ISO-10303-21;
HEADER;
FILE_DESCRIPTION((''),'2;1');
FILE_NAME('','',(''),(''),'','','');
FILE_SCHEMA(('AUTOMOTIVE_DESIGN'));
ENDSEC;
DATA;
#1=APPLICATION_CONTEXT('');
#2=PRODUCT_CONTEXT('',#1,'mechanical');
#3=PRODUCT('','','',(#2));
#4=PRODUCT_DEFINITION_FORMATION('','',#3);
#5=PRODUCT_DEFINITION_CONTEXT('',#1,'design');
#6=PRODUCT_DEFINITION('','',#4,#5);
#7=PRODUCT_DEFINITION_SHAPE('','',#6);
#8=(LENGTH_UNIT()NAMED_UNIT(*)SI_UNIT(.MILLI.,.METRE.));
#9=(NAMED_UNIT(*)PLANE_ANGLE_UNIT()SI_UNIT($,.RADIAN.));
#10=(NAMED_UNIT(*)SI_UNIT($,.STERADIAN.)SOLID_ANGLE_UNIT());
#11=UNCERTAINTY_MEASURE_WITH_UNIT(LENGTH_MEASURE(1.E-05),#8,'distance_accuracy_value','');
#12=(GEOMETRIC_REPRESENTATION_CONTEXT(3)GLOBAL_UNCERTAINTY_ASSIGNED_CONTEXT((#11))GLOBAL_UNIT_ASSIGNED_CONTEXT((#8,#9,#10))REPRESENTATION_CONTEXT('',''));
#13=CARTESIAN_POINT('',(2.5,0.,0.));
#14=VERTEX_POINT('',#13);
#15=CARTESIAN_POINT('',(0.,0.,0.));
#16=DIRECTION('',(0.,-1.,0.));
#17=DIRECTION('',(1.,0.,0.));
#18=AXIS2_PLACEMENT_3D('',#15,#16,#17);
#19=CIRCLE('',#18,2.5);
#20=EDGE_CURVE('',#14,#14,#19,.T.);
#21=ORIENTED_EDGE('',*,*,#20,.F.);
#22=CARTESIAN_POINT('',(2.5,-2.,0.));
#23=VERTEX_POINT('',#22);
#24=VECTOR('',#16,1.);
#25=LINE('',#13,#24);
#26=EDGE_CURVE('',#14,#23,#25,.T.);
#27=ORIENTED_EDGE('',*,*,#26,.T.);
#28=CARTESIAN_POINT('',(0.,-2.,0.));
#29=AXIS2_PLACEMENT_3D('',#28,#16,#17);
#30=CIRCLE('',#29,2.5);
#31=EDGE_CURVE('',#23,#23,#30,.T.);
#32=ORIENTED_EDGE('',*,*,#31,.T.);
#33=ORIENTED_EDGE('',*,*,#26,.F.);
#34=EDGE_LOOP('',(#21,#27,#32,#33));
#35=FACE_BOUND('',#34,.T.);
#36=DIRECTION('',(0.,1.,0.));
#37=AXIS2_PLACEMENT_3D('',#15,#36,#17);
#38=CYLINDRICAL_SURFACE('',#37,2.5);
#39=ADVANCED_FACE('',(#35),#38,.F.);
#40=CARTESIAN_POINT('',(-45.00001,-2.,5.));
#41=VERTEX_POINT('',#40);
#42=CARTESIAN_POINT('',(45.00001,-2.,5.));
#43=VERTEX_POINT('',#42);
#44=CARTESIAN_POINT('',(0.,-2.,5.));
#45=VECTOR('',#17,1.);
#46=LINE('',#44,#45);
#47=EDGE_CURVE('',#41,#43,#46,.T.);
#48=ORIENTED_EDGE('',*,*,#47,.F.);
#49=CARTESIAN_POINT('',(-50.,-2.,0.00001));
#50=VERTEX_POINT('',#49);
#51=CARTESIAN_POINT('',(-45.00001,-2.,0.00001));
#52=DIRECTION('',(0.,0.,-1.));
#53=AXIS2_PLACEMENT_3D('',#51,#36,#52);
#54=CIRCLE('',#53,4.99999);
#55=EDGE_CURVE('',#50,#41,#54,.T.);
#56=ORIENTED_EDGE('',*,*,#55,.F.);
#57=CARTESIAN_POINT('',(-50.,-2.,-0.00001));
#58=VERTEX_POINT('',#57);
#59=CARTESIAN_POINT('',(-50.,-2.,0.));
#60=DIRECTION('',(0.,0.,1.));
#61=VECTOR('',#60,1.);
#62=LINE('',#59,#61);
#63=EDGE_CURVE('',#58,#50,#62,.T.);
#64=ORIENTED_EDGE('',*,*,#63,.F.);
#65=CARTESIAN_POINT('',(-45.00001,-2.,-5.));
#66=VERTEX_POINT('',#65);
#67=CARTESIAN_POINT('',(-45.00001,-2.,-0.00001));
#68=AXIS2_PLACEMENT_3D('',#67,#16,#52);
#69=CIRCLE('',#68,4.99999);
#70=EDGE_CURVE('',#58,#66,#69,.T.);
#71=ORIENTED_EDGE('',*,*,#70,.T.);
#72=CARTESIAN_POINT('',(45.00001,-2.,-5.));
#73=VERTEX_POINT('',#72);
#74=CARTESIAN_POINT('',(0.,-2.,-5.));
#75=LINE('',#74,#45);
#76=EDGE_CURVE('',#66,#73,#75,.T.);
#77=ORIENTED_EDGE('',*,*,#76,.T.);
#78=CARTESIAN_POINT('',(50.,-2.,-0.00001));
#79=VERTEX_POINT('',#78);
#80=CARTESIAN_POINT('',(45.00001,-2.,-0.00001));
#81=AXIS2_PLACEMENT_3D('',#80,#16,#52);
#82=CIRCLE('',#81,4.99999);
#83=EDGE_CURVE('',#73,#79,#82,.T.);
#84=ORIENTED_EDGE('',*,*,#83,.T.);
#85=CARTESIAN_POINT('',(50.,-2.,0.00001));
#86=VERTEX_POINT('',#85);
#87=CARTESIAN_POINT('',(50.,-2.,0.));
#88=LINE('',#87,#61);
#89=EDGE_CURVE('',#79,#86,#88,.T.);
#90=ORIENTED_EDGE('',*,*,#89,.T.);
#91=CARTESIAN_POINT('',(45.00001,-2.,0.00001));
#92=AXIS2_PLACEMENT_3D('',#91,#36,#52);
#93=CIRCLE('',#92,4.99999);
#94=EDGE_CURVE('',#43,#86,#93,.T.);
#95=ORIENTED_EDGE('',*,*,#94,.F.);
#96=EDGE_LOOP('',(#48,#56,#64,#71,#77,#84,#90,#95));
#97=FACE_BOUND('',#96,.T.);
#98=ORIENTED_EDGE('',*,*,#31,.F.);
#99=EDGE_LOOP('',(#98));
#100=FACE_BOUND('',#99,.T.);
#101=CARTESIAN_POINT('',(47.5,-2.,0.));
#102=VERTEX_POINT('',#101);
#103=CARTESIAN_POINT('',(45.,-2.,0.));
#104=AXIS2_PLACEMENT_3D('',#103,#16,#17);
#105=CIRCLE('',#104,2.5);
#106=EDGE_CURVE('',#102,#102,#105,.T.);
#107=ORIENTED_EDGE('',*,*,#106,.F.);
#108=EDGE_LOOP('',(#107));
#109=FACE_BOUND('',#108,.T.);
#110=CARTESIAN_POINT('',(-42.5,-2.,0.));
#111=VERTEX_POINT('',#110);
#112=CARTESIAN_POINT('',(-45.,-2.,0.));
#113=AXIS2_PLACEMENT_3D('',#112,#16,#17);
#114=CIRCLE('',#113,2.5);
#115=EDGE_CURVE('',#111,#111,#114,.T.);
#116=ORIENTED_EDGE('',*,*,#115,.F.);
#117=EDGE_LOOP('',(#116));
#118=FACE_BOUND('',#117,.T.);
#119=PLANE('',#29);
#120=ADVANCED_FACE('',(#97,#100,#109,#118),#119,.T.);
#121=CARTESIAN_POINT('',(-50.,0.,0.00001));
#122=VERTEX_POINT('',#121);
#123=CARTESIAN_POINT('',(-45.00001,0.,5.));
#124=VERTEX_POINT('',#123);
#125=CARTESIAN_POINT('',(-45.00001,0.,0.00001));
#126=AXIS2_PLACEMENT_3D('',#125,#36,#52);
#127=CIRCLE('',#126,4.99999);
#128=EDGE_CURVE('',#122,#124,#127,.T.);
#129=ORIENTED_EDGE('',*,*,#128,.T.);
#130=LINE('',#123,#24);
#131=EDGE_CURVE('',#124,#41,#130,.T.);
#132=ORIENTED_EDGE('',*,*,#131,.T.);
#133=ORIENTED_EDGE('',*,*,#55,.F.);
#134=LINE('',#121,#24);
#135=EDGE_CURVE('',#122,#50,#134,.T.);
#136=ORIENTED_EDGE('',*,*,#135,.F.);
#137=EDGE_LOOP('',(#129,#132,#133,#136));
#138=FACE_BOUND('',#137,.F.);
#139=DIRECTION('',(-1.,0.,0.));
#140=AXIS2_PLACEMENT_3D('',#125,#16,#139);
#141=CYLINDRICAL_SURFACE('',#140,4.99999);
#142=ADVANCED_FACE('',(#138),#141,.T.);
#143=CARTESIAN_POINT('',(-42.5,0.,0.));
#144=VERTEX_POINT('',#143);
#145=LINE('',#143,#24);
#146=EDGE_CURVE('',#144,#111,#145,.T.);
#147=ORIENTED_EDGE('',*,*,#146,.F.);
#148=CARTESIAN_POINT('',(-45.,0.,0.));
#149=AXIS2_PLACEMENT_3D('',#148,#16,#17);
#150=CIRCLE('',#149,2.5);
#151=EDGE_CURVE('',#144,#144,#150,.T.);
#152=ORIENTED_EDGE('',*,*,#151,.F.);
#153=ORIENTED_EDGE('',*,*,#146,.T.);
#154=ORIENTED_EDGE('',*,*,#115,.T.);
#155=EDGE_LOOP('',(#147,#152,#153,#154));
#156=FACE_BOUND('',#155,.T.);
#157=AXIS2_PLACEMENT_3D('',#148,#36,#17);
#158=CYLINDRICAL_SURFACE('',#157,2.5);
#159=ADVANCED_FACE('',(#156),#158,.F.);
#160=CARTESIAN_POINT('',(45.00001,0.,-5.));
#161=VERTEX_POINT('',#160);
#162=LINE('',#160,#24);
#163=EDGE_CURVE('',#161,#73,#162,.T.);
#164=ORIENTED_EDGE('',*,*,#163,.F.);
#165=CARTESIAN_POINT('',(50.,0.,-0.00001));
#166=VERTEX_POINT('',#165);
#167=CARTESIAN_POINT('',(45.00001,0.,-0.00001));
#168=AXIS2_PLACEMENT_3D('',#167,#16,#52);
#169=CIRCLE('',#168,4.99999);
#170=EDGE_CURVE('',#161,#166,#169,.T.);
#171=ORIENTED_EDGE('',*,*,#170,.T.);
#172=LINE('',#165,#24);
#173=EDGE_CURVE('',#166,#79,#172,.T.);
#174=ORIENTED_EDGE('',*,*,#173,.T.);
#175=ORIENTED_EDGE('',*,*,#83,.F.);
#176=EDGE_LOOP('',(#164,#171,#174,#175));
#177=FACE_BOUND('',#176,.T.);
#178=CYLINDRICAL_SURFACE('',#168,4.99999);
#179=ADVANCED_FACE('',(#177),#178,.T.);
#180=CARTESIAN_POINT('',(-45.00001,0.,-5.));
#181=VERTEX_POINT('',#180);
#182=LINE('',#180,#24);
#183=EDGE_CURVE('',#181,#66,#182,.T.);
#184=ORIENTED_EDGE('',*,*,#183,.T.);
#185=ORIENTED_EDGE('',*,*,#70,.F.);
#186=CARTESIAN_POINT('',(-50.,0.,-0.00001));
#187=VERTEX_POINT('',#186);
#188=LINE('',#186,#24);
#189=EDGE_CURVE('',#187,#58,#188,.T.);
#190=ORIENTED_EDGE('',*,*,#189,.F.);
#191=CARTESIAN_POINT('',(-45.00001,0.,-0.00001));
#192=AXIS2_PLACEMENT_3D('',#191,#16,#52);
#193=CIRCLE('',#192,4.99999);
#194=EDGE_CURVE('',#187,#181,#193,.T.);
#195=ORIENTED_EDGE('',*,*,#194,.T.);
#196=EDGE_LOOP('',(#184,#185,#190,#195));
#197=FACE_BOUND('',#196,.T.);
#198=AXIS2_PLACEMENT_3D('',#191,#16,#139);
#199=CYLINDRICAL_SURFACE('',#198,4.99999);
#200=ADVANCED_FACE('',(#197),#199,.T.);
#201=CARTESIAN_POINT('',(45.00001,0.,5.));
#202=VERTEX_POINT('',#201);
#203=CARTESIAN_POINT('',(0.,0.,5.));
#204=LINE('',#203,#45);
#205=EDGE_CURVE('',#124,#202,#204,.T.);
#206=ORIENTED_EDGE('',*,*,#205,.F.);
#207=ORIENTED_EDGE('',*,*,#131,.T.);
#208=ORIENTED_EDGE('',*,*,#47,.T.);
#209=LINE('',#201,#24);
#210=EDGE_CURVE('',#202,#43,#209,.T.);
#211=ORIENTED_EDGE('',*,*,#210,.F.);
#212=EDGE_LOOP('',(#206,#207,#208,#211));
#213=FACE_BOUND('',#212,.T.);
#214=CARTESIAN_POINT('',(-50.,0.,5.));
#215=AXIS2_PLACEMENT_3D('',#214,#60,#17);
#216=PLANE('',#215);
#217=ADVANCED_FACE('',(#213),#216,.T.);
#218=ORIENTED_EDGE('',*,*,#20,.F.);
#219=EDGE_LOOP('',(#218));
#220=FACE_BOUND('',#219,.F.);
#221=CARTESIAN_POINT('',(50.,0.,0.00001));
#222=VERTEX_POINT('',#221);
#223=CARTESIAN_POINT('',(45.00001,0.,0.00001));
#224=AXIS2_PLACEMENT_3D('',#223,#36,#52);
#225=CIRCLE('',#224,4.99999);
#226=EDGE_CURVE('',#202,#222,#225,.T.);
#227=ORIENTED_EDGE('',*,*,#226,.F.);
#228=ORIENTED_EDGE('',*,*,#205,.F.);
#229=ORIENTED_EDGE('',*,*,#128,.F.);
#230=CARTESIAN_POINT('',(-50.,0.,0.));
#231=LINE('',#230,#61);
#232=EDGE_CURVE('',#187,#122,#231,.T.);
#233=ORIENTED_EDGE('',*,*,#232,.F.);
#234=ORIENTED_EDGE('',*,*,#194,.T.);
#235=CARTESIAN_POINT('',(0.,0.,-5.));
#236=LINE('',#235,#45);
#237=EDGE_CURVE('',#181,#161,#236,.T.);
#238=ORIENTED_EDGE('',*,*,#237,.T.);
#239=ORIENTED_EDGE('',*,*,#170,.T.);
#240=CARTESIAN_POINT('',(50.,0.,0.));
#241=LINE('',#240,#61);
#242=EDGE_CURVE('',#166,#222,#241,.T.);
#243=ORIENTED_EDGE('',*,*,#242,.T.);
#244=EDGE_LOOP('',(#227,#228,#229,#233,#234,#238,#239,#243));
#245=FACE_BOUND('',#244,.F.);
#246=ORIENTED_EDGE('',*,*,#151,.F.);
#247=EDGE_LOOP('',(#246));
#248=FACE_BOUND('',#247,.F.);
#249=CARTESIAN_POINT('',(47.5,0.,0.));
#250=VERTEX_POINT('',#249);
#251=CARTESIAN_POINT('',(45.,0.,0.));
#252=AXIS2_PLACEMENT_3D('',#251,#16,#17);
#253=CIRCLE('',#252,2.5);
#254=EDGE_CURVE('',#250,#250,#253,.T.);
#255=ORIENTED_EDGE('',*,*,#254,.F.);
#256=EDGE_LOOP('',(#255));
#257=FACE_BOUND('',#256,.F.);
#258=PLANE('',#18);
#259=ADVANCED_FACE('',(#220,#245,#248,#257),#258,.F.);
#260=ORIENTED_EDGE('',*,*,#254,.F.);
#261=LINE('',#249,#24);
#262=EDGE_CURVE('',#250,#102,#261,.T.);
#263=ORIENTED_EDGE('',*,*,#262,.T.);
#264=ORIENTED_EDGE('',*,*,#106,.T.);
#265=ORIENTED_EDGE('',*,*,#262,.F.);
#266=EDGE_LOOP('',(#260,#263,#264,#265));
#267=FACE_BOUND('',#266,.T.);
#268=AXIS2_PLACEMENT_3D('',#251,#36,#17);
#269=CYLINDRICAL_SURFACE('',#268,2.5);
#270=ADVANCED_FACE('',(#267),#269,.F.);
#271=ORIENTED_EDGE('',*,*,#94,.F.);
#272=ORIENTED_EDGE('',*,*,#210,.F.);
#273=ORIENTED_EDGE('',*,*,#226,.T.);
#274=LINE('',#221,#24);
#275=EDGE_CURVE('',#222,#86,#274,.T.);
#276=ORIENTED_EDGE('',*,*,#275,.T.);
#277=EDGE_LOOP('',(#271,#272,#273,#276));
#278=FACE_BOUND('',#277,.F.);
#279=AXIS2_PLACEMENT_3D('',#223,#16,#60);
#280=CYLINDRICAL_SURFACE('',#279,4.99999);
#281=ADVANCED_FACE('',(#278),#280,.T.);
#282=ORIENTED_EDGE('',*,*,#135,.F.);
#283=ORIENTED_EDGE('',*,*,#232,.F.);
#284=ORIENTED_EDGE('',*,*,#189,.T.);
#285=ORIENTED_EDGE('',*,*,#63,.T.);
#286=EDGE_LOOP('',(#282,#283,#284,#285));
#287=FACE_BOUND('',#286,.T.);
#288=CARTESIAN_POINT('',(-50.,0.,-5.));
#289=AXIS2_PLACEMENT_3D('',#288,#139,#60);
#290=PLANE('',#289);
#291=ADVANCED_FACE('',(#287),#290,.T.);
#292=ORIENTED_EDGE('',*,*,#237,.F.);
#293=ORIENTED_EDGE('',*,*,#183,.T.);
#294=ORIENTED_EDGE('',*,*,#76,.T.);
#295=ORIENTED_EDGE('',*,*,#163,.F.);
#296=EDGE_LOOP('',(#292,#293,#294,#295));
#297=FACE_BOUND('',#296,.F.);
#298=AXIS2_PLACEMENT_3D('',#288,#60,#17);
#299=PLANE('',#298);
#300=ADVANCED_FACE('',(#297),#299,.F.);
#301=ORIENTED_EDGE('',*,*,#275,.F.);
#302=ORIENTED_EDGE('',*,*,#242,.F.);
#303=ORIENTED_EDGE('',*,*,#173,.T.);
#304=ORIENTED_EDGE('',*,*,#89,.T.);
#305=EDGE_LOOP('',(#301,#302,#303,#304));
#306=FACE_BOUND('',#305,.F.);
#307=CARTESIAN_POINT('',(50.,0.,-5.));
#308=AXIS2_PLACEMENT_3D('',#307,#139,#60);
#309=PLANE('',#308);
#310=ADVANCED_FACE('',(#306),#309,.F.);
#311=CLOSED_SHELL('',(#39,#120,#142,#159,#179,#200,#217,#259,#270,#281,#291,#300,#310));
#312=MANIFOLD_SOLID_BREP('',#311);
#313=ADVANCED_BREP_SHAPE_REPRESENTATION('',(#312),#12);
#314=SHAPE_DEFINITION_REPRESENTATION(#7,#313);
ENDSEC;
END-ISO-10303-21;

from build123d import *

# Parameters (mm, degrees)
F0_W     = 100
F0_H     = 10
F0_R     = 2.5
F1_DEPTH = 2
F2_R     = 4.99999


# Not quite as in the source:
# - a fillet or chamfer is up to 0.001 mm smaller than in the source, because OpenCascade refuses the exact size


with BuildPart() as f1:
    # F0 (on Front) → F1 (new body)
    with BuildSketch(Plane.XZ):
        Rectangle(F0_W, F0_H)
        with Locations((-45, 0)):
            Circle(F0_R, mode=Mode.SUBTRACT)
        Circle(F0_R, mode=Mode.SUBTRACT)
        with Locations((45, 0)):
            Circle(F0_R, mode=Mode.SUBTRACT)
    extrude(amount=F1_DEPTH)

    # F2 (radius 5 in the source; OpenCascade refuses exactly that, so slightly less here)
    f2_edges = [f1.edges().sort_by_distance(p)[0] for p in [
        (-50, -1, 5),
        (-50, -1, -5),
        (50, -1, -5),
        (50, -1, 5),
    ]]
    fillet(f2_edges, radius=F2_R)


with BuildPart() as f3_1:
    # F3: copy of F1
    add(f1.part.moved(Location((0, -2, 0))))


solid = f1.part
